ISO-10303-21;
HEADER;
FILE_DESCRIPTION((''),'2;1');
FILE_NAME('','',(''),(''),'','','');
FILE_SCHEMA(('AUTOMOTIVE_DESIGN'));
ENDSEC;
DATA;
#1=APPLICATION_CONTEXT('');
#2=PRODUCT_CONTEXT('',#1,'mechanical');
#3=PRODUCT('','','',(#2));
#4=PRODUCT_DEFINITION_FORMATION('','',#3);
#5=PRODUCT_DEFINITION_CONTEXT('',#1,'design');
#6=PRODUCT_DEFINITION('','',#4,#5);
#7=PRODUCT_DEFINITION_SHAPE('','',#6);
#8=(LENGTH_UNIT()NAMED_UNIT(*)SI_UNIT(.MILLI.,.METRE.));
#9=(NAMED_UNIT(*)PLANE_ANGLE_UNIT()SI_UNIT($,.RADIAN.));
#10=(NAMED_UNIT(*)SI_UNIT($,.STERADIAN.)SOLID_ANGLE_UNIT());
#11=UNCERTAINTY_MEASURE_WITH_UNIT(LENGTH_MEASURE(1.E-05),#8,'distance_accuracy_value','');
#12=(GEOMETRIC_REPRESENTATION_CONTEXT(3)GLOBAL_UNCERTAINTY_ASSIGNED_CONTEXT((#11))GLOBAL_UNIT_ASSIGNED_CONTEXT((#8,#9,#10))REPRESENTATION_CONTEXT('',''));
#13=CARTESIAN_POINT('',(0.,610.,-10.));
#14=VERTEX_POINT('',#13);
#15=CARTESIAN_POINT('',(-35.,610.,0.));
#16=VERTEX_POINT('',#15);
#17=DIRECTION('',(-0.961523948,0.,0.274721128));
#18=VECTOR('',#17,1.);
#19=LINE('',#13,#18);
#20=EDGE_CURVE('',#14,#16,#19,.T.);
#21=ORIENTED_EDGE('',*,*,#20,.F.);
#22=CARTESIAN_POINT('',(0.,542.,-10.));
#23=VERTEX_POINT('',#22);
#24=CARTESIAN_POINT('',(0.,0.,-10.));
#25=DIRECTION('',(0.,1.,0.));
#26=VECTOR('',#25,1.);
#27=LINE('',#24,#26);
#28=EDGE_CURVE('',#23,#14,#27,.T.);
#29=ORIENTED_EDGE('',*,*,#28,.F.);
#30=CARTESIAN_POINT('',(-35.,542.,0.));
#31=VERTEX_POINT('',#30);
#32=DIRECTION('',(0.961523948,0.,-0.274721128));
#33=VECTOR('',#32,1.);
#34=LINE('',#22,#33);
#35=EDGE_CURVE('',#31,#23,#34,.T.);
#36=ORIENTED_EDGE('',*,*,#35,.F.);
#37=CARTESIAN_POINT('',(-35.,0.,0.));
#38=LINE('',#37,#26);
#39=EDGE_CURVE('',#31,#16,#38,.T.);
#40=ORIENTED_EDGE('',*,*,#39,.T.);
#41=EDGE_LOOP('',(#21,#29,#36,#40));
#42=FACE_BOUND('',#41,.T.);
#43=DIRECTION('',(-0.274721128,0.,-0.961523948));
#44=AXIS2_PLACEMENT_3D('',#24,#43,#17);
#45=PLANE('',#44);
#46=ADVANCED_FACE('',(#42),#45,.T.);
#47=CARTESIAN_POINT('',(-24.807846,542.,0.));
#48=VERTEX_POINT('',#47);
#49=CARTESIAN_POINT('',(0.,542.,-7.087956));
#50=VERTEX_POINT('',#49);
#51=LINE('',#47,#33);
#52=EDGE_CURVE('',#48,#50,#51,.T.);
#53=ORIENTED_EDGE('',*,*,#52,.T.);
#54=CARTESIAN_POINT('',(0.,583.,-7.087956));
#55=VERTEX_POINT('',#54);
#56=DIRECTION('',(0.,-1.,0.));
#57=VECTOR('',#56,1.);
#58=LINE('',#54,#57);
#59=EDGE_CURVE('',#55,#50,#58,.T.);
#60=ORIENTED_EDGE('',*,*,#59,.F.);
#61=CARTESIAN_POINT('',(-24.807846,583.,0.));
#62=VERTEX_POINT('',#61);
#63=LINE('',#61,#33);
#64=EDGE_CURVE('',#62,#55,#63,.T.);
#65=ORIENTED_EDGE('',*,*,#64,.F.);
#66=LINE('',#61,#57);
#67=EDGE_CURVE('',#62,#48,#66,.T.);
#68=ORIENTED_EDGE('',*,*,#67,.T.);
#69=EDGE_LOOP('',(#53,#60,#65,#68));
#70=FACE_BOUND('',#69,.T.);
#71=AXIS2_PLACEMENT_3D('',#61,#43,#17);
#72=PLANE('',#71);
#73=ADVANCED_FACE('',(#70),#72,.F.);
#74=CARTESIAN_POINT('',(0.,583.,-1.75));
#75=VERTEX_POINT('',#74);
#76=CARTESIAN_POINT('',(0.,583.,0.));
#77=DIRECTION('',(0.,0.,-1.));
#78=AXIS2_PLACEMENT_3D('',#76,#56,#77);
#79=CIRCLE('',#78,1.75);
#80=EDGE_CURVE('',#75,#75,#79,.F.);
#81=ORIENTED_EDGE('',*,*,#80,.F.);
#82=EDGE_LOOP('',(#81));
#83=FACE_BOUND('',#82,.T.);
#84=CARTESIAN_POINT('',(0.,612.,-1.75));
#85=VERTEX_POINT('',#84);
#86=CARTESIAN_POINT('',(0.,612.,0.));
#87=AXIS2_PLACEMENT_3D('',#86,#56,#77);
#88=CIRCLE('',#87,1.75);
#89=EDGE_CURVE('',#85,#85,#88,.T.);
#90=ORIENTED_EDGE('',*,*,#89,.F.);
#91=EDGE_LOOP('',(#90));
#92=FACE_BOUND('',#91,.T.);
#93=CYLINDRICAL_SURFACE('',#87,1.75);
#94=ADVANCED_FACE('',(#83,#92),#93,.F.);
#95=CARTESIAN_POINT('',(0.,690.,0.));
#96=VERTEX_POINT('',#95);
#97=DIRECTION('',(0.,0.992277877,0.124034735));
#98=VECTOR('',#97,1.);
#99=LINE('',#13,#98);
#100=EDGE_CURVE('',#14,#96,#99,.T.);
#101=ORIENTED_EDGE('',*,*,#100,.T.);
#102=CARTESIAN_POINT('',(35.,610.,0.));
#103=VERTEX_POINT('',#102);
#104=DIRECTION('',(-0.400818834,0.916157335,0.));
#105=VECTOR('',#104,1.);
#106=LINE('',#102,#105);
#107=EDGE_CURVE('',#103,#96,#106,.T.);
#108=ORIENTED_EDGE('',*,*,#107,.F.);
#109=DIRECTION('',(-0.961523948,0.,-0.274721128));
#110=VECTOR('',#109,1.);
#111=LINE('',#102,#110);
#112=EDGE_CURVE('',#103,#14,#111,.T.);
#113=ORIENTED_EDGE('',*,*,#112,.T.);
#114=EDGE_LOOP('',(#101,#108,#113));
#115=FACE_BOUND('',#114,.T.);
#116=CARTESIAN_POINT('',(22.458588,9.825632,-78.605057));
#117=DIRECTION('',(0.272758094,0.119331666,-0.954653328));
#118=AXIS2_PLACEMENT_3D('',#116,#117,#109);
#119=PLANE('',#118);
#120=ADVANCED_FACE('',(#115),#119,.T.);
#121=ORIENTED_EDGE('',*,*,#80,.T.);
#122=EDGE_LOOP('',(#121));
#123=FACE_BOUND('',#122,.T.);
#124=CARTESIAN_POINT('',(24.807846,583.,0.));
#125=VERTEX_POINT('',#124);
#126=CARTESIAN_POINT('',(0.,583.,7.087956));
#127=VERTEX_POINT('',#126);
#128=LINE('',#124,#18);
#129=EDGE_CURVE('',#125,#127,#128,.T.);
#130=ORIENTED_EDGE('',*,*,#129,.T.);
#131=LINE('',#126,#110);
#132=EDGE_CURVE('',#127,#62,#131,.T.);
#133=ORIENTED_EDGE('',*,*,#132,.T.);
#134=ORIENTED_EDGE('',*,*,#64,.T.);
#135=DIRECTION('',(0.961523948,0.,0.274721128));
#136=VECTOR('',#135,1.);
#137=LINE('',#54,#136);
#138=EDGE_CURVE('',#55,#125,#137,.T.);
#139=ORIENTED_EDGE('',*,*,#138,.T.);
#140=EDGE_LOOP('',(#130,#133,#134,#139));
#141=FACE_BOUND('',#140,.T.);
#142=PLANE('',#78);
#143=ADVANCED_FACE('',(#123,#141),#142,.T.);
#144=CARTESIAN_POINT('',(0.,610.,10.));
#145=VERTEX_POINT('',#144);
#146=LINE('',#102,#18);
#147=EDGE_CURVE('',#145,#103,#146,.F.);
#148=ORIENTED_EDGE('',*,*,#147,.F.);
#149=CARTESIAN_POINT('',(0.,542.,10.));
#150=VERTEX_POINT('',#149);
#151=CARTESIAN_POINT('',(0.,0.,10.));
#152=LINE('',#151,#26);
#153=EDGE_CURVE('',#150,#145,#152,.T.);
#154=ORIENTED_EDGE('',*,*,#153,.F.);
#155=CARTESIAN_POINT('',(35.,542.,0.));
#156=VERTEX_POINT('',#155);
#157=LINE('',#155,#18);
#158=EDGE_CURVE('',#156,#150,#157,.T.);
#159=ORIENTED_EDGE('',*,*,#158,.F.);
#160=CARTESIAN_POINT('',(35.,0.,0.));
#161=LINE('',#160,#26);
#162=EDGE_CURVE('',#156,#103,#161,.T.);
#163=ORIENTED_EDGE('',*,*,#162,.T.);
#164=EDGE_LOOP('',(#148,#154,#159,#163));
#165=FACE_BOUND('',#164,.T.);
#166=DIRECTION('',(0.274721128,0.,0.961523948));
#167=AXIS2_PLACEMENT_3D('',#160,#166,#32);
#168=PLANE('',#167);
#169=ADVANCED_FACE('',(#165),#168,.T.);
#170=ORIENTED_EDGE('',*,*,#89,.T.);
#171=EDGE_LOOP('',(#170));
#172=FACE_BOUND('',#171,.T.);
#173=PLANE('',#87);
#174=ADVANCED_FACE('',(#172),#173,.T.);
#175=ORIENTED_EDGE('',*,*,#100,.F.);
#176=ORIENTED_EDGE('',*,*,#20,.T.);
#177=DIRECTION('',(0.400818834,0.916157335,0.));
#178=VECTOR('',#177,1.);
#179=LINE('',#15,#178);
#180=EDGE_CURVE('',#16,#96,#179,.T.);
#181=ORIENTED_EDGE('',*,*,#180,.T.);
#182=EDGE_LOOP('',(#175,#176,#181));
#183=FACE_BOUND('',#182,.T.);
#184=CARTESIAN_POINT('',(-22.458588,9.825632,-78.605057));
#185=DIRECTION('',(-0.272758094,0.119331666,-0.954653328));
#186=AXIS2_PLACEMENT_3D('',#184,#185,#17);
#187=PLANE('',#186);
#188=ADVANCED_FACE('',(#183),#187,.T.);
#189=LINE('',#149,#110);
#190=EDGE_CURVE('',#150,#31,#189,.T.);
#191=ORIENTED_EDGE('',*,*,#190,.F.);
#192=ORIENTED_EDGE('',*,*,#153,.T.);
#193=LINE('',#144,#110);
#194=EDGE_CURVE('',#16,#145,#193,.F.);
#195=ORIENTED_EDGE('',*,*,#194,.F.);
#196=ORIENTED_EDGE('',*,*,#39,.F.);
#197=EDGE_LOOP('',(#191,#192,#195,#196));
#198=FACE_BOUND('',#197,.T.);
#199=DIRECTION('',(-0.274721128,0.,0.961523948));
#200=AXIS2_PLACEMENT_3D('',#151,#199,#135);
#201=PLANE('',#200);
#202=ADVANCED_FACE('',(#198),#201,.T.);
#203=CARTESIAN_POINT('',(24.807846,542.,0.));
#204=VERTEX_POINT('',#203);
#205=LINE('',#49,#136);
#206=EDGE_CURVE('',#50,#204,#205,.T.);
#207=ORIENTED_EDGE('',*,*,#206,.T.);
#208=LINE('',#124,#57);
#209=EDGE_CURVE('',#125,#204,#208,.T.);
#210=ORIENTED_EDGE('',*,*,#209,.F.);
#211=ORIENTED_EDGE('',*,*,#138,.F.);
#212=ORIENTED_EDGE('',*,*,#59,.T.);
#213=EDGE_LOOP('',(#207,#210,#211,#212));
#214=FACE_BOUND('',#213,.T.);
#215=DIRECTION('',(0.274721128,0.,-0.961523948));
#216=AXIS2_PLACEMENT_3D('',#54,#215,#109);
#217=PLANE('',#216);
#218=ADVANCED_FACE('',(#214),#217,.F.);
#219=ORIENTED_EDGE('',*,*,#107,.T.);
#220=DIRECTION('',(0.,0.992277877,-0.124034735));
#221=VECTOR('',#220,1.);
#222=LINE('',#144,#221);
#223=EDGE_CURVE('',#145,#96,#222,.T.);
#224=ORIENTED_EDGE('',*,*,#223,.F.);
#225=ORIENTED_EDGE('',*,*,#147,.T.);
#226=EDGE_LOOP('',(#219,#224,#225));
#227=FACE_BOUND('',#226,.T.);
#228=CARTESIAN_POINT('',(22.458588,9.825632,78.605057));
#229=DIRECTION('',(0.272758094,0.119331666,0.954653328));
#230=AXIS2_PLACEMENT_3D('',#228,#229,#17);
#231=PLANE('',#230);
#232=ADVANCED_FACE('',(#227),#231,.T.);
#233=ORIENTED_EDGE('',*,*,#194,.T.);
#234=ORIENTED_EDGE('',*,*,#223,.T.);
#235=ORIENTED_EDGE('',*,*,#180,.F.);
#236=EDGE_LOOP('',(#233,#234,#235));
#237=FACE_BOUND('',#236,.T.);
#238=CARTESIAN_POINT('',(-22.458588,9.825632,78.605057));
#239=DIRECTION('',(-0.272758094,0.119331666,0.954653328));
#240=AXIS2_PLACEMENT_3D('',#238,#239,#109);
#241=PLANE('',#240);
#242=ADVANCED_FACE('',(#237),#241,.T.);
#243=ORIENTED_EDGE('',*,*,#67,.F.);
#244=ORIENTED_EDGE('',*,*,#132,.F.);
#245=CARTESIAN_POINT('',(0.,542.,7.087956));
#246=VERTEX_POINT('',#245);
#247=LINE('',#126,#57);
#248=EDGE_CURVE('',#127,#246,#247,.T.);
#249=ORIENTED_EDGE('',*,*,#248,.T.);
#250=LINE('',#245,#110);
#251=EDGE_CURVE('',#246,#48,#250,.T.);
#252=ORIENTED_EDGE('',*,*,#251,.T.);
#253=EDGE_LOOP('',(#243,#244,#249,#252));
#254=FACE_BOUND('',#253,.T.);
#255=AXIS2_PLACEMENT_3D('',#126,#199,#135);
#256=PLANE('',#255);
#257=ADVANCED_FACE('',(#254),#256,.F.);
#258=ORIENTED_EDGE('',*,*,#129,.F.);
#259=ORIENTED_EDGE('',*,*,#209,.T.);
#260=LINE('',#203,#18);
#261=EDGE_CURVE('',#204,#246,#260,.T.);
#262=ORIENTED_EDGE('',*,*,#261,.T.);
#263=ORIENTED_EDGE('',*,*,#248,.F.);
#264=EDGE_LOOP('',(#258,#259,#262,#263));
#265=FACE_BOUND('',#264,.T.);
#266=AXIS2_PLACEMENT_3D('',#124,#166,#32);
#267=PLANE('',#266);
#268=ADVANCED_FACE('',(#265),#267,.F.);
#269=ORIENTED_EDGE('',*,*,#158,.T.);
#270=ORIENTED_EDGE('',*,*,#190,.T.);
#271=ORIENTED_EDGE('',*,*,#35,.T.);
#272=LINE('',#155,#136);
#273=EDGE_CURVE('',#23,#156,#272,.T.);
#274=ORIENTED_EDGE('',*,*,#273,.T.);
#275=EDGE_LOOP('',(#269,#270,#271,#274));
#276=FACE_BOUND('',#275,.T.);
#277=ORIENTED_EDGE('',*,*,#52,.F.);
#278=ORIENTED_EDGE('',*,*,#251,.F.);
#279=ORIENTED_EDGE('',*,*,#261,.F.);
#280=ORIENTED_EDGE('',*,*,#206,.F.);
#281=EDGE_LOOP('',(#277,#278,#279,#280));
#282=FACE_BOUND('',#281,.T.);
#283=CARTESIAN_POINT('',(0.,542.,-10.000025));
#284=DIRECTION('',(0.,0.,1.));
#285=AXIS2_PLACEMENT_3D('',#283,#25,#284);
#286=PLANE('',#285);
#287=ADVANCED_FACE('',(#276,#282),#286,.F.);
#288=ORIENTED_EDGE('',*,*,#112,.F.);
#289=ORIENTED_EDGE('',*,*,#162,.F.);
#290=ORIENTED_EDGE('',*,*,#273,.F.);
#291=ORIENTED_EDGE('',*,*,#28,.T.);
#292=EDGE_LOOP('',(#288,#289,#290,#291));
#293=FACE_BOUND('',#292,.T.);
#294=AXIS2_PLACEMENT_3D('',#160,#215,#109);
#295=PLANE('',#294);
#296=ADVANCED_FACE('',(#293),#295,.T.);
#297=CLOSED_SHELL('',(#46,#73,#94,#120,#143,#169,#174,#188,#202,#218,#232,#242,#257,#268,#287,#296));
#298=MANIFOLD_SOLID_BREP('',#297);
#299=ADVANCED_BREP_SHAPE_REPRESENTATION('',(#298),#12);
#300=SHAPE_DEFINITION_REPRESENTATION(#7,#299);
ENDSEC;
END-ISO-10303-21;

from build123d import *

# Parameters (mm, degrees)
SWEEP_1_DEPTH            = 610
CUT_EXTRUDE_2_DEPTH      = 12
SKETCH_21_R              = 1.75
CUT_EXTRUDE_3_DEPTH      = 600
CUT_EXTRUDE_4_DEPTH      = 691.959477934
CUT_EXTRUDE_4_DEPTH_BACK = 691.959477934
SKETCH_26_W              = 70
SKETCH_26_H              = 530
CUT_EXTRUDE_5_DEPTH      = 41


# Read off the part's stored shape, not the designer's step: 扫描1
with BuildPart() as part:
    # 扫描1 outline → 扫描1 (new body)
    with BuildSketch(Plane(origin=(0, 0, 0), x_dir=(1, 0, 0), z_dir=(0, 1, 0))):
        Polygon((-35, 0), (35, 0), (0, 10), align=None)
    sweep_1 = extrude(amount=SWEEP_1_DEPTH)

    # 草图1 → 放样1 section 0
    with BuildSketch(Plane.XY, mode=Mode.PRIVATE) as loft_1_s0:
        with BuildLine():
            Line((-35, 610), (0, 690))
            Line((0, 690), (35, 610))
            Line((35, 610), (-35, 610))
        make_face()
    loft_1 = loft([Vertex(0, 610, -10), loft_1_s0.sketch])

    # 镜向1: 扫描1, 放样1 across plane
    add(sweep_1.mirror(Plane.XY))
    add(loft_1.mirror(Plane.XY))

    # 草图19 → 切除-拉伸2 (cut)
    with BuildSketch(Plane.XZ):
        Polygon((0, -10), (35, 0), (0, 10), (-35, 0), align=None)
    extrude(amount=-CUT_EXTRUDE_2_DEPTH, mode=Mode.SUBTRACT)

    # 草图21 → 切除-拉伸3 (cut)
    with BuildSketch(Plane.XZ.offset(-12)):
        with Locations(Location((0, 0, 0), (0, 0, 270))):
            Circle(SKETCH_21_R)
    extrude(amount=-CUT_EXTRUDE_3_DEPTH, mode=Mode.SUBTRACT)

    # 草图26 → 切除-拉伸4 (cut, two sides: drawn at the far end of the back side and taken through both)
    with BuildSketch(Plane.XY.offset(-CUT_EXTRUDE_4_DEPTH_BACK)):
        with Locations((0, 277)):
            Rectangle(SKETCH_26_W, SKETCH_26_H)
    extrude(amount=CUT_EXTRUDE_4_DEPTH + CUT_EXTRUDE_4_DEPTH_BACK, mode=Mode.SUBTRACT)

    # 草图27 → 切除-拉伸5 (cut)
    with BuildSketch(Plane.XZ.offset(-542)):
        Polygon((0, -7.087956044), (24.807846155, 0), (0, 7.087956044), (-24.807846155, 0), align=None)
    extrude(amount=-CUT_EXTRUDE_5_DEPTH, mode=Mode.SUBTRACT)


solid = part.part
